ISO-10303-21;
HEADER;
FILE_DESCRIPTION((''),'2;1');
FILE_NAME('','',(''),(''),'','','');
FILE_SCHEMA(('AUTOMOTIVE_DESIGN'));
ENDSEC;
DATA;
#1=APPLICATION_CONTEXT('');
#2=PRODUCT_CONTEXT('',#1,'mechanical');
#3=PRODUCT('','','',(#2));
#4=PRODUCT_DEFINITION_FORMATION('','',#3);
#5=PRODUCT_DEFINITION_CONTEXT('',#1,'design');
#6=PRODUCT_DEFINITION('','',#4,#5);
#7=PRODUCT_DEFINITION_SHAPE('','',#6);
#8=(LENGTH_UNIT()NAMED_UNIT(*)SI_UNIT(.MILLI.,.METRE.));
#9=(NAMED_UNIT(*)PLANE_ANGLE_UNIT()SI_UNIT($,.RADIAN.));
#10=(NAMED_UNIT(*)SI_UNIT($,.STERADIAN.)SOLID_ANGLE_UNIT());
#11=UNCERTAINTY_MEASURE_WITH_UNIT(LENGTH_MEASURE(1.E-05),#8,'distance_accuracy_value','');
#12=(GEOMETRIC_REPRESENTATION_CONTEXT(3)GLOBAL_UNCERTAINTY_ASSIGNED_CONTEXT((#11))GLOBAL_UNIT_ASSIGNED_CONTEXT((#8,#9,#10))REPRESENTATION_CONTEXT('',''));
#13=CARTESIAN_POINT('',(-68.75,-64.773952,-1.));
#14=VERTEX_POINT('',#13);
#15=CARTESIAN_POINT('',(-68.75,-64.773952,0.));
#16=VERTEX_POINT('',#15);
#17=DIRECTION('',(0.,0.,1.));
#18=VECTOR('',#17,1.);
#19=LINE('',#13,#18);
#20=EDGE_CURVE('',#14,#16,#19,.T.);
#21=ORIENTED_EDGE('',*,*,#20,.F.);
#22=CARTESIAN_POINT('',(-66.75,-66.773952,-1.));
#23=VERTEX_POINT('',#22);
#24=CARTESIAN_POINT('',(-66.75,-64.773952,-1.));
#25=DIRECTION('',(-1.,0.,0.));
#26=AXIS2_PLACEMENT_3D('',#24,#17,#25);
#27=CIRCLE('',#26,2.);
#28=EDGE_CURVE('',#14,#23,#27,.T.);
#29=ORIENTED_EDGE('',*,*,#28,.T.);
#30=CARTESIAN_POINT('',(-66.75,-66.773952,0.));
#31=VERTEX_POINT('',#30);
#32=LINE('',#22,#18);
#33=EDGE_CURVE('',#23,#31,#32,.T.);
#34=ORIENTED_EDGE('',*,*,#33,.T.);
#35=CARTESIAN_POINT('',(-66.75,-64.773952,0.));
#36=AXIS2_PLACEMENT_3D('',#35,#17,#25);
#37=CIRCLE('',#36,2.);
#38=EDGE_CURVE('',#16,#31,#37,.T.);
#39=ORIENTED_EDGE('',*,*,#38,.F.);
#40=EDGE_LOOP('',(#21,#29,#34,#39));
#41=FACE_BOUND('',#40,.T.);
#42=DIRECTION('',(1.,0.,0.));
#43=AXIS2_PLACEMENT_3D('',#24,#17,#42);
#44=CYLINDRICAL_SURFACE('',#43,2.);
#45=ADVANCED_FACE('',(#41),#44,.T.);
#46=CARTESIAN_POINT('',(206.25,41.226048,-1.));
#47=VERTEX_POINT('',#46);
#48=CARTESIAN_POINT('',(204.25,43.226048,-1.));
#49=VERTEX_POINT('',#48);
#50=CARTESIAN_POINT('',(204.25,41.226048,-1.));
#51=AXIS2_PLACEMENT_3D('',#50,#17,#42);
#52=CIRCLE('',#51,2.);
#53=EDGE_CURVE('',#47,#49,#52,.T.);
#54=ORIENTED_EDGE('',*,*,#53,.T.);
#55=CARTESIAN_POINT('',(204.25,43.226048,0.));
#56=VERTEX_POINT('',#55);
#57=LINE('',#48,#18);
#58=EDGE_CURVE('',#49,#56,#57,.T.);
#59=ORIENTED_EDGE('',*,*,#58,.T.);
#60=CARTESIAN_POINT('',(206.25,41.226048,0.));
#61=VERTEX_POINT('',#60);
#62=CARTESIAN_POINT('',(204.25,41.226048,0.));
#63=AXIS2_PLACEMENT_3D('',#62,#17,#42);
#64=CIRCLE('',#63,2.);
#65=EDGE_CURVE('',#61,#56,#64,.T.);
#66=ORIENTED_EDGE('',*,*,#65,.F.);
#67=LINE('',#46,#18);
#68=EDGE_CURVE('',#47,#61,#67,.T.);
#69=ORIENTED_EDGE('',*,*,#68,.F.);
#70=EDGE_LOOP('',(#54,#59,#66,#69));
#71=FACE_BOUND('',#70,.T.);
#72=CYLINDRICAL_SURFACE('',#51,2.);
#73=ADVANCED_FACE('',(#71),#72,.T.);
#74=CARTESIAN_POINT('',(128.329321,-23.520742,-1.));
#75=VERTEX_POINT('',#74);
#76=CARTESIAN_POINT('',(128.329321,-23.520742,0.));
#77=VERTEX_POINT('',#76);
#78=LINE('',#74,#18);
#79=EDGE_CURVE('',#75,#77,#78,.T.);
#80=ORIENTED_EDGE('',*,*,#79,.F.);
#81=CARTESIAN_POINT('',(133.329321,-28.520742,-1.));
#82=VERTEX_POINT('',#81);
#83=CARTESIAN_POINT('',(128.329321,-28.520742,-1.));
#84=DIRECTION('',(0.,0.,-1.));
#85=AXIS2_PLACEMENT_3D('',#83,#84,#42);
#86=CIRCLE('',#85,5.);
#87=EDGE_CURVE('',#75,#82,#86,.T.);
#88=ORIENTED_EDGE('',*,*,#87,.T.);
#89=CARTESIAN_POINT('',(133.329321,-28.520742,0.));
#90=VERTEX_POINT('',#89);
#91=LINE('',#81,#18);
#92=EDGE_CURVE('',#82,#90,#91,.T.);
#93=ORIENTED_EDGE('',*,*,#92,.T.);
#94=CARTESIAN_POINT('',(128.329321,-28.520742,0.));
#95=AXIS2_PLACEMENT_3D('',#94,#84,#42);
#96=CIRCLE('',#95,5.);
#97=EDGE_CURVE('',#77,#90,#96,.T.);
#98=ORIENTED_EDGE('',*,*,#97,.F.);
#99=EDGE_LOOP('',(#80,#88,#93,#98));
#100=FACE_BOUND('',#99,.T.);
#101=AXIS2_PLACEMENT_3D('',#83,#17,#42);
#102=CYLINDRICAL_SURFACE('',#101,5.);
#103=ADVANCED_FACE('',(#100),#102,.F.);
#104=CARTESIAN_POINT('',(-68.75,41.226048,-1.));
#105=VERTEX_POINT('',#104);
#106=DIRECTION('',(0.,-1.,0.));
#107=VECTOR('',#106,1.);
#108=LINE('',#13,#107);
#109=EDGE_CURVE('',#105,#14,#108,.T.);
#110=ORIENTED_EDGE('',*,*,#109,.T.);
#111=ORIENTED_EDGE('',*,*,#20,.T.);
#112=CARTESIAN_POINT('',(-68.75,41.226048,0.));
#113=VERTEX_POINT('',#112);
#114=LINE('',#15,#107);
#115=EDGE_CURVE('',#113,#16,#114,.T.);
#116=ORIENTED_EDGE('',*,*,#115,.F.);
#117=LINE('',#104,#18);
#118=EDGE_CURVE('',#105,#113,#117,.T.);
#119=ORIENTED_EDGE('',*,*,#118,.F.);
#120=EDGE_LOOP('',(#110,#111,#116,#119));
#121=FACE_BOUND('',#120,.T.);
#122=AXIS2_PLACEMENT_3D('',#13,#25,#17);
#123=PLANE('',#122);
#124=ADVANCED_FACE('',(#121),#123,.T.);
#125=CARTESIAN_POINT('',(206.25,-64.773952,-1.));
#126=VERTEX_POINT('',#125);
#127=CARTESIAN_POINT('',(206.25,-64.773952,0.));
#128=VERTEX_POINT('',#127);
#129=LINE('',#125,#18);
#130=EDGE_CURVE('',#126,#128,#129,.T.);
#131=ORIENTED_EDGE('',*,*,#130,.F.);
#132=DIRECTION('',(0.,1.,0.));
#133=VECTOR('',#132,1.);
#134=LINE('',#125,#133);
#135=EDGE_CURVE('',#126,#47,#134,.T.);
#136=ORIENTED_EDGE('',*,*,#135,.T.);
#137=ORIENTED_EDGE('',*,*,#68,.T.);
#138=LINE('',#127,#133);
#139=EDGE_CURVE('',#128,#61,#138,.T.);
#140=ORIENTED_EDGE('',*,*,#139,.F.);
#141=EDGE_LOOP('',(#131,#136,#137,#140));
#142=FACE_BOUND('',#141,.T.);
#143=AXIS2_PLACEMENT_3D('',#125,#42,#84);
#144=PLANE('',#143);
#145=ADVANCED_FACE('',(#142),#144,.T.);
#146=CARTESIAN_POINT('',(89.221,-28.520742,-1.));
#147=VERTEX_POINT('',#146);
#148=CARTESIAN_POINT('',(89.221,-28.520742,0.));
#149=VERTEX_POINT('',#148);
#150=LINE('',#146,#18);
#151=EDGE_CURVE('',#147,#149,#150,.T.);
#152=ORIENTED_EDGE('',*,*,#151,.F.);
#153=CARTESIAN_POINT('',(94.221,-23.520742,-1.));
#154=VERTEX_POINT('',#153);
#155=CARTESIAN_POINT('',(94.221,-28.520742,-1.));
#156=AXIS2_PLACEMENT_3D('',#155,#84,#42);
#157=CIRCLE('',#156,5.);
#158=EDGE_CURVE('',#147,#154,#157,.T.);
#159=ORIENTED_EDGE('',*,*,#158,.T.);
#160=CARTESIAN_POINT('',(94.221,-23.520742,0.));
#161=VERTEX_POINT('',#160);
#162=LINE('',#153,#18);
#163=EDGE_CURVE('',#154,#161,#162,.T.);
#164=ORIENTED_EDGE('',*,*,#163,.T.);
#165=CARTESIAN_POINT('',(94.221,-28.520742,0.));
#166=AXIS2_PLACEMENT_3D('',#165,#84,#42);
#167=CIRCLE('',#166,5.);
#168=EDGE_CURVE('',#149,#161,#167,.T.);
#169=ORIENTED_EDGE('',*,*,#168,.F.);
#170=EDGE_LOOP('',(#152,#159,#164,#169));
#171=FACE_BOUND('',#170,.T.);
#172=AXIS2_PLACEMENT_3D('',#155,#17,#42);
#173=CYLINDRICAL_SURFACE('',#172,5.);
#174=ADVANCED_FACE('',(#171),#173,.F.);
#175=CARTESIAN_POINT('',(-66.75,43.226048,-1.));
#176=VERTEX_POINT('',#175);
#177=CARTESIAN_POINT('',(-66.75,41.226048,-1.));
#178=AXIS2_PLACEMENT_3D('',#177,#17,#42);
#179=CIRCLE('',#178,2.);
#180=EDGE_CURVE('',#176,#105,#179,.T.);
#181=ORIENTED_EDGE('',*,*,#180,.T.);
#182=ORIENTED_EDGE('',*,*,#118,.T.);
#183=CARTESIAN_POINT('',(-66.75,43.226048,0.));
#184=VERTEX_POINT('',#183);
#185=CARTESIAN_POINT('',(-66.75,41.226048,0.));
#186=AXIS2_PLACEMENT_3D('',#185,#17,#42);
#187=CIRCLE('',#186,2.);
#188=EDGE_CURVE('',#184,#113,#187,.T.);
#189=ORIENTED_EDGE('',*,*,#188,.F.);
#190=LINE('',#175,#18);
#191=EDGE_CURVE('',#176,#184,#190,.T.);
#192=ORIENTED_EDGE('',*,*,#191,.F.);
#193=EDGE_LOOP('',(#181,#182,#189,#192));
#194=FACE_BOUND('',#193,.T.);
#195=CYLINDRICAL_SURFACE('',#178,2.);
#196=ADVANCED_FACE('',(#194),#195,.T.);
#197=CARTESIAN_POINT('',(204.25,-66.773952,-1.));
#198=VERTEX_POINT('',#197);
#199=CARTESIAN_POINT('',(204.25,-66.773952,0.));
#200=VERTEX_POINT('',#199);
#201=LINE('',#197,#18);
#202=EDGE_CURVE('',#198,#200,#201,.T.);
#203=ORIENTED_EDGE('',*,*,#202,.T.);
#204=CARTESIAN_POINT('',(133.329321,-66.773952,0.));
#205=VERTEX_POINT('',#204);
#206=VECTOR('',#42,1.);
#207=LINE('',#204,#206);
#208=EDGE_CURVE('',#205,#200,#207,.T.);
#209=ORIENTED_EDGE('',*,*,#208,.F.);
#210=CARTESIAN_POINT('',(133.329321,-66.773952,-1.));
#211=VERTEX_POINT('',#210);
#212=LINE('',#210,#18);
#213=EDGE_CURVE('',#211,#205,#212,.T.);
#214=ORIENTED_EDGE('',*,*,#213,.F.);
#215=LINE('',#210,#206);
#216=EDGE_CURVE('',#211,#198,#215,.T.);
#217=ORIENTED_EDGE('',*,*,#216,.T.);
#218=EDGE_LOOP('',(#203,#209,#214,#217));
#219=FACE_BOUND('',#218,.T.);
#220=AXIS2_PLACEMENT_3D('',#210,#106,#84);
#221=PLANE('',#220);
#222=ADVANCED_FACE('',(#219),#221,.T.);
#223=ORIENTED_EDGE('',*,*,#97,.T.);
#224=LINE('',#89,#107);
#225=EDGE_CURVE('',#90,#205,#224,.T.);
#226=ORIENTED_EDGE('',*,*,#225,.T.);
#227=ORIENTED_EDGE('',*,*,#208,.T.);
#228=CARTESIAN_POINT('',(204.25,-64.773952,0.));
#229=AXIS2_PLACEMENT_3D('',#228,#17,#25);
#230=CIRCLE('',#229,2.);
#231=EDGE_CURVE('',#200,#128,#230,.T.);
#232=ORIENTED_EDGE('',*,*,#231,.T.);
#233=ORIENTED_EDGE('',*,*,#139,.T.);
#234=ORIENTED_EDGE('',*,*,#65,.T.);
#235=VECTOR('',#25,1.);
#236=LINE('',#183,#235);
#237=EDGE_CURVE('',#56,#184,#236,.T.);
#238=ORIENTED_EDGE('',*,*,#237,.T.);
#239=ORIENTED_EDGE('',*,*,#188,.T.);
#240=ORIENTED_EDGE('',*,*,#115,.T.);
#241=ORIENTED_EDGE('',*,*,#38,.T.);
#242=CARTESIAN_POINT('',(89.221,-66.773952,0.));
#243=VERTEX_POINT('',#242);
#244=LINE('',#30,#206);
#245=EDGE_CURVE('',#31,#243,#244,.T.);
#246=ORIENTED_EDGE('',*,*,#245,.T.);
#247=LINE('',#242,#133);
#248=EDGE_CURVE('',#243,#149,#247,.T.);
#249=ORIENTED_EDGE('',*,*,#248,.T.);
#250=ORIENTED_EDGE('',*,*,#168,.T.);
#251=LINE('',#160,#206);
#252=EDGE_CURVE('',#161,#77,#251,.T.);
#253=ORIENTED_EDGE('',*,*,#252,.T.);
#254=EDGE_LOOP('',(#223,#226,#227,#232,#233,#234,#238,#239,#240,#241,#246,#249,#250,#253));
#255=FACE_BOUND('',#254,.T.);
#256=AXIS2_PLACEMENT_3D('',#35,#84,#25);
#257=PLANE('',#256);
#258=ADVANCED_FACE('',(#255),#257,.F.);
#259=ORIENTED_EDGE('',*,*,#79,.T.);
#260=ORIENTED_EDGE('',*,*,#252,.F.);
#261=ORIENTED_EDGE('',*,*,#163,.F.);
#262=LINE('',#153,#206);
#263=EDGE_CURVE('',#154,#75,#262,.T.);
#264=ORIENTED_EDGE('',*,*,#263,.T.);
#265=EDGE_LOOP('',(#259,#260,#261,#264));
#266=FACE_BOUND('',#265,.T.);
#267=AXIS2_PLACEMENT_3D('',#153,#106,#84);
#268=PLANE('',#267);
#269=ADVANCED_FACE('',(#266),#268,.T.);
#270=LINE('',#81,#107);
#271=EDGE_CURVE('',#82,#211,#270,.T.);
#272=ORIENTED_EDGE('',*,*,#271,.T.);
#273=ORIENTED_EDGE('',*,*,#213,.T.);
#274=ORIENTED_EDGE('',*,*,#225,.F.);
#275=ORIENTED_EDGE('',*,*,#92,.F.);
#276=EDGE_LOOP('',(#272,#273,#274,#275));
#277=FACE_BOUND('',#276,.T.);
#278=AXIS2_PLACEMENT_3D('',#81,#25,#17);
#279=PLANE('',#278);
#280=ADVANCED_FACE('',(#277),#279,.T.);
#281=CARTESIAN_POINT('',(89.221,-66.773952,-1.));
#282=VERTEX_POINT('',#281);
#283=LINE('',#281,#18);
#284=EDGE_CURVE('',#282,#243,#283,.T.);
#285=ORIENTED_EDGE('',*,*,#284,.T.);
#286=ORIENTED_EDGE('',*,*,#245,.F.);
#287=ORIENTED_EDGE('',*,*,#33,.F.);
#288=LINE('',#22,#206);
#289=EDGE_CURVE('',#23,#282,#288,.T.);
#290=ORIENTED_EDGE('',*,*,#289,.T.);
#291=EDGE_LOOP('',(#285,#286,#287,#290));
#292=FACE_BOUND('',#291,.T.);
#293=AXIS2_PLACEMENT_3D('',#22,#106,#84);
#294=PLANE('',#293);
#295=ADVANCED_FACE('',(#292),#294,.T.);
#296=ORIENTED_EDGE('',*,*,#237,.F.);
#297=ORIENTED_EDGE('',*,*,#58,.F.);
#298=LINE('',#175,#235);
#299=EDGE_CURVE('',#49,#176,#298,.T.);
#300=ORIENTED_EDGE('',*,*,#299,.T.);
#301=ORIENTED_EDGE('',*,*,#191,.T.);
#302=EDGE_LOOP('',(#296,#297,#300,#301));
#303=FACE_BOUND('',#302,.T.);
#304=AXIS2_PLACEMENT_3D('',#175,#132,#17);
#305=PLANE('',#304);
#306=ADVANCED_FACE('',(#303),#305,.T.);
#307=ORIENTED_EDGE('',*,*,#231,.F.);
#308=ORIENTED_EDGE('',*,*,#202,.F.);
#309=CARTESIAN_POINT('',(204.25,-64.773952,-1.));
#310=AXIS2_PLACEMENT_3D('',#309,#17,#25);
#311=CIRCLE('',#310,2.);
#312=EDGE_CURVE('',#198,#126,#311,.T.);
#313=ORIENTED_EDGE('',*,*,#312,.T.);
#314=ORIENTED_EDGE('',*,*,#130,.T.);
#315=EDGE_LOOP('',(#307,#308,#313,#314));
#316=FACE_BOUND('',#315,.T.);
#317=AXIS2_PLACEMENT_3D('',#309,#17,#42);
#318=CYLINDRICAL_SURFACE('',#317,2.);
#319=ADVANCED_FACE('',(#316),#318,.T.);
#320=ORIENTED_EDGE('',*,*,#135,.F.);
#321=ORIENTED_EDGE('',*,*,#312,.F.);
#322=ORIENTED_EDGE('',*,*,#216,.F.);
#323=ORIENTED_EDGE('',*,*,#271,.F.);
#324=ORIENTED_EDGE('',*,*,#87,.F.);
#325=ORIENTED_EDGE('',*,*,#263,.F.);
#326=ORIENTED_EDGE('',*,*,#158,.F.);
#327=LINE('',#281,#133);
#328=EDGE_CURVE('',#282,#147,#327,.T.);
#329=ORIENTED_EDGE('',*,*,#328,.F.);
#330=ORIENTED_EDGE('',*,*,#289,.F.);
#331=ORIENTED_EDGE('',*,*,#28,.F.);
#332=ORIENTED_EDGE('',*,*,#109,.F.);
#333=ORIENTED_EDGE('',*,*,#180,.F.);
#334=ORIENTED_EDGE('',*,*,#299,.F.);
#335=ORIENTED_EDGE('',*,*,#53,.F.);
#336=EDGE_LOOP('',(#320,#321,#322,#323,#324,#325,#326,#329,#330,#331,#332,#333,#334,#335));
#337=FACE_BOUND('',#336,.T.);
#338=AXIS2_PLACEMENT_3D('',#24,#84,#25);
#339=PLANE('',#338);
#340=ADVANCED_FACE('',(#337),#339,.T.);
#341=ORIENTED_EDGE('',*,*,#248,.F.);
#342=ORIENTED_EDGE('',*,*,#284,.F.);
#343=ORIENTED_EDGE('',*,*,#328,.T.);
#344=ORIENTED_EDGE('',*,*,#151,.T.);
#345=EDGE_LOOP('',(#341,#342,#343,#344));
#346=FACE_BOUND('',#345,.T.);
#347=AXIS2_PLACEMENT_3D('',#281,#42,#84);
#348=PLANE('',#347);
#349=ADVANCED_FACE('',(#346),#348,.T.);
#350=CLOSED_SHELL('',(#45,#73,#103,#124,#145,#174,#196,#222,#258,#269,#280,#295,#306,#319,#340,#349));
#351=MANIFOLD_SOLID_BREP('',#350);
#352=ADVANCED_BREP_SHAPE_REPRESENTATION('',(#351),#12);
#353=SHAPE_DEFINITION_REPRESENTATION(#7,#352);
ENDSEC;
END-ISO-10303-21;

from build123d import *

# Parameters (mm, degrees)
SM_BASE_FLANGE_1_DEPTH = 1


# Sheet-metal steps are written as plain solids
with BuildPart() as part:
    # Sketch 1 → Базовая кромка1 (new body)
    with BuildSketch(Plane.XY):
        with BuildLine():
            Line((89.221000297, -66.773952096), (89.221000297, -28.520742394))
            ThreePointArc((89.221000297, -28.520742394), (90.685466391, -24.985208488), (94.221000297, -23.520742394))
            Line((94.221000297, -23.520742394), (128.329321471, -23.520742394))
            ThreePointArc((128.329321471, -23.520742394), (131.864855377, -24.985208488), (133.329321471, -28.520742394))
            Line((133.329321471, -28.520742394), (133.329321471, -66.773952096))
            Line((133.329321471, -66.773952096), (204.25, -66.773952096))
            ThreePointArc((204.25, -66.773952096), (205.664213562, -66.188165658), (206.25, -64.773952096))
            Line((206.25, -64.773952096), (206.25, 41.226047904))
            ThreePointArc((206.25, 41.226047904), (205.664213562, 42.640261467), (204.25, 43.226047904))
            Line((204.25, 43.226047904), (-66.75, 43.226047904))
            ThreePointArc((-66.75, 43.226047904), (-68.164213562, 42.640261467), (-68.75, 41.226047904))
            Line((-68.75, 41.226047904), (-68.75, -64.773952096))
            ThreePointArc((-68.75, -64.773952096), (-68.164213562, -66.188165658), (-66.75, -66.773952096))
            Line((-66.75, -66.773952096), (89.221000297, -66.773952096))
        make_face()
    extrude(amount=-SM_BASE_FLANGE_1_DEPTH)


solid = part.part
